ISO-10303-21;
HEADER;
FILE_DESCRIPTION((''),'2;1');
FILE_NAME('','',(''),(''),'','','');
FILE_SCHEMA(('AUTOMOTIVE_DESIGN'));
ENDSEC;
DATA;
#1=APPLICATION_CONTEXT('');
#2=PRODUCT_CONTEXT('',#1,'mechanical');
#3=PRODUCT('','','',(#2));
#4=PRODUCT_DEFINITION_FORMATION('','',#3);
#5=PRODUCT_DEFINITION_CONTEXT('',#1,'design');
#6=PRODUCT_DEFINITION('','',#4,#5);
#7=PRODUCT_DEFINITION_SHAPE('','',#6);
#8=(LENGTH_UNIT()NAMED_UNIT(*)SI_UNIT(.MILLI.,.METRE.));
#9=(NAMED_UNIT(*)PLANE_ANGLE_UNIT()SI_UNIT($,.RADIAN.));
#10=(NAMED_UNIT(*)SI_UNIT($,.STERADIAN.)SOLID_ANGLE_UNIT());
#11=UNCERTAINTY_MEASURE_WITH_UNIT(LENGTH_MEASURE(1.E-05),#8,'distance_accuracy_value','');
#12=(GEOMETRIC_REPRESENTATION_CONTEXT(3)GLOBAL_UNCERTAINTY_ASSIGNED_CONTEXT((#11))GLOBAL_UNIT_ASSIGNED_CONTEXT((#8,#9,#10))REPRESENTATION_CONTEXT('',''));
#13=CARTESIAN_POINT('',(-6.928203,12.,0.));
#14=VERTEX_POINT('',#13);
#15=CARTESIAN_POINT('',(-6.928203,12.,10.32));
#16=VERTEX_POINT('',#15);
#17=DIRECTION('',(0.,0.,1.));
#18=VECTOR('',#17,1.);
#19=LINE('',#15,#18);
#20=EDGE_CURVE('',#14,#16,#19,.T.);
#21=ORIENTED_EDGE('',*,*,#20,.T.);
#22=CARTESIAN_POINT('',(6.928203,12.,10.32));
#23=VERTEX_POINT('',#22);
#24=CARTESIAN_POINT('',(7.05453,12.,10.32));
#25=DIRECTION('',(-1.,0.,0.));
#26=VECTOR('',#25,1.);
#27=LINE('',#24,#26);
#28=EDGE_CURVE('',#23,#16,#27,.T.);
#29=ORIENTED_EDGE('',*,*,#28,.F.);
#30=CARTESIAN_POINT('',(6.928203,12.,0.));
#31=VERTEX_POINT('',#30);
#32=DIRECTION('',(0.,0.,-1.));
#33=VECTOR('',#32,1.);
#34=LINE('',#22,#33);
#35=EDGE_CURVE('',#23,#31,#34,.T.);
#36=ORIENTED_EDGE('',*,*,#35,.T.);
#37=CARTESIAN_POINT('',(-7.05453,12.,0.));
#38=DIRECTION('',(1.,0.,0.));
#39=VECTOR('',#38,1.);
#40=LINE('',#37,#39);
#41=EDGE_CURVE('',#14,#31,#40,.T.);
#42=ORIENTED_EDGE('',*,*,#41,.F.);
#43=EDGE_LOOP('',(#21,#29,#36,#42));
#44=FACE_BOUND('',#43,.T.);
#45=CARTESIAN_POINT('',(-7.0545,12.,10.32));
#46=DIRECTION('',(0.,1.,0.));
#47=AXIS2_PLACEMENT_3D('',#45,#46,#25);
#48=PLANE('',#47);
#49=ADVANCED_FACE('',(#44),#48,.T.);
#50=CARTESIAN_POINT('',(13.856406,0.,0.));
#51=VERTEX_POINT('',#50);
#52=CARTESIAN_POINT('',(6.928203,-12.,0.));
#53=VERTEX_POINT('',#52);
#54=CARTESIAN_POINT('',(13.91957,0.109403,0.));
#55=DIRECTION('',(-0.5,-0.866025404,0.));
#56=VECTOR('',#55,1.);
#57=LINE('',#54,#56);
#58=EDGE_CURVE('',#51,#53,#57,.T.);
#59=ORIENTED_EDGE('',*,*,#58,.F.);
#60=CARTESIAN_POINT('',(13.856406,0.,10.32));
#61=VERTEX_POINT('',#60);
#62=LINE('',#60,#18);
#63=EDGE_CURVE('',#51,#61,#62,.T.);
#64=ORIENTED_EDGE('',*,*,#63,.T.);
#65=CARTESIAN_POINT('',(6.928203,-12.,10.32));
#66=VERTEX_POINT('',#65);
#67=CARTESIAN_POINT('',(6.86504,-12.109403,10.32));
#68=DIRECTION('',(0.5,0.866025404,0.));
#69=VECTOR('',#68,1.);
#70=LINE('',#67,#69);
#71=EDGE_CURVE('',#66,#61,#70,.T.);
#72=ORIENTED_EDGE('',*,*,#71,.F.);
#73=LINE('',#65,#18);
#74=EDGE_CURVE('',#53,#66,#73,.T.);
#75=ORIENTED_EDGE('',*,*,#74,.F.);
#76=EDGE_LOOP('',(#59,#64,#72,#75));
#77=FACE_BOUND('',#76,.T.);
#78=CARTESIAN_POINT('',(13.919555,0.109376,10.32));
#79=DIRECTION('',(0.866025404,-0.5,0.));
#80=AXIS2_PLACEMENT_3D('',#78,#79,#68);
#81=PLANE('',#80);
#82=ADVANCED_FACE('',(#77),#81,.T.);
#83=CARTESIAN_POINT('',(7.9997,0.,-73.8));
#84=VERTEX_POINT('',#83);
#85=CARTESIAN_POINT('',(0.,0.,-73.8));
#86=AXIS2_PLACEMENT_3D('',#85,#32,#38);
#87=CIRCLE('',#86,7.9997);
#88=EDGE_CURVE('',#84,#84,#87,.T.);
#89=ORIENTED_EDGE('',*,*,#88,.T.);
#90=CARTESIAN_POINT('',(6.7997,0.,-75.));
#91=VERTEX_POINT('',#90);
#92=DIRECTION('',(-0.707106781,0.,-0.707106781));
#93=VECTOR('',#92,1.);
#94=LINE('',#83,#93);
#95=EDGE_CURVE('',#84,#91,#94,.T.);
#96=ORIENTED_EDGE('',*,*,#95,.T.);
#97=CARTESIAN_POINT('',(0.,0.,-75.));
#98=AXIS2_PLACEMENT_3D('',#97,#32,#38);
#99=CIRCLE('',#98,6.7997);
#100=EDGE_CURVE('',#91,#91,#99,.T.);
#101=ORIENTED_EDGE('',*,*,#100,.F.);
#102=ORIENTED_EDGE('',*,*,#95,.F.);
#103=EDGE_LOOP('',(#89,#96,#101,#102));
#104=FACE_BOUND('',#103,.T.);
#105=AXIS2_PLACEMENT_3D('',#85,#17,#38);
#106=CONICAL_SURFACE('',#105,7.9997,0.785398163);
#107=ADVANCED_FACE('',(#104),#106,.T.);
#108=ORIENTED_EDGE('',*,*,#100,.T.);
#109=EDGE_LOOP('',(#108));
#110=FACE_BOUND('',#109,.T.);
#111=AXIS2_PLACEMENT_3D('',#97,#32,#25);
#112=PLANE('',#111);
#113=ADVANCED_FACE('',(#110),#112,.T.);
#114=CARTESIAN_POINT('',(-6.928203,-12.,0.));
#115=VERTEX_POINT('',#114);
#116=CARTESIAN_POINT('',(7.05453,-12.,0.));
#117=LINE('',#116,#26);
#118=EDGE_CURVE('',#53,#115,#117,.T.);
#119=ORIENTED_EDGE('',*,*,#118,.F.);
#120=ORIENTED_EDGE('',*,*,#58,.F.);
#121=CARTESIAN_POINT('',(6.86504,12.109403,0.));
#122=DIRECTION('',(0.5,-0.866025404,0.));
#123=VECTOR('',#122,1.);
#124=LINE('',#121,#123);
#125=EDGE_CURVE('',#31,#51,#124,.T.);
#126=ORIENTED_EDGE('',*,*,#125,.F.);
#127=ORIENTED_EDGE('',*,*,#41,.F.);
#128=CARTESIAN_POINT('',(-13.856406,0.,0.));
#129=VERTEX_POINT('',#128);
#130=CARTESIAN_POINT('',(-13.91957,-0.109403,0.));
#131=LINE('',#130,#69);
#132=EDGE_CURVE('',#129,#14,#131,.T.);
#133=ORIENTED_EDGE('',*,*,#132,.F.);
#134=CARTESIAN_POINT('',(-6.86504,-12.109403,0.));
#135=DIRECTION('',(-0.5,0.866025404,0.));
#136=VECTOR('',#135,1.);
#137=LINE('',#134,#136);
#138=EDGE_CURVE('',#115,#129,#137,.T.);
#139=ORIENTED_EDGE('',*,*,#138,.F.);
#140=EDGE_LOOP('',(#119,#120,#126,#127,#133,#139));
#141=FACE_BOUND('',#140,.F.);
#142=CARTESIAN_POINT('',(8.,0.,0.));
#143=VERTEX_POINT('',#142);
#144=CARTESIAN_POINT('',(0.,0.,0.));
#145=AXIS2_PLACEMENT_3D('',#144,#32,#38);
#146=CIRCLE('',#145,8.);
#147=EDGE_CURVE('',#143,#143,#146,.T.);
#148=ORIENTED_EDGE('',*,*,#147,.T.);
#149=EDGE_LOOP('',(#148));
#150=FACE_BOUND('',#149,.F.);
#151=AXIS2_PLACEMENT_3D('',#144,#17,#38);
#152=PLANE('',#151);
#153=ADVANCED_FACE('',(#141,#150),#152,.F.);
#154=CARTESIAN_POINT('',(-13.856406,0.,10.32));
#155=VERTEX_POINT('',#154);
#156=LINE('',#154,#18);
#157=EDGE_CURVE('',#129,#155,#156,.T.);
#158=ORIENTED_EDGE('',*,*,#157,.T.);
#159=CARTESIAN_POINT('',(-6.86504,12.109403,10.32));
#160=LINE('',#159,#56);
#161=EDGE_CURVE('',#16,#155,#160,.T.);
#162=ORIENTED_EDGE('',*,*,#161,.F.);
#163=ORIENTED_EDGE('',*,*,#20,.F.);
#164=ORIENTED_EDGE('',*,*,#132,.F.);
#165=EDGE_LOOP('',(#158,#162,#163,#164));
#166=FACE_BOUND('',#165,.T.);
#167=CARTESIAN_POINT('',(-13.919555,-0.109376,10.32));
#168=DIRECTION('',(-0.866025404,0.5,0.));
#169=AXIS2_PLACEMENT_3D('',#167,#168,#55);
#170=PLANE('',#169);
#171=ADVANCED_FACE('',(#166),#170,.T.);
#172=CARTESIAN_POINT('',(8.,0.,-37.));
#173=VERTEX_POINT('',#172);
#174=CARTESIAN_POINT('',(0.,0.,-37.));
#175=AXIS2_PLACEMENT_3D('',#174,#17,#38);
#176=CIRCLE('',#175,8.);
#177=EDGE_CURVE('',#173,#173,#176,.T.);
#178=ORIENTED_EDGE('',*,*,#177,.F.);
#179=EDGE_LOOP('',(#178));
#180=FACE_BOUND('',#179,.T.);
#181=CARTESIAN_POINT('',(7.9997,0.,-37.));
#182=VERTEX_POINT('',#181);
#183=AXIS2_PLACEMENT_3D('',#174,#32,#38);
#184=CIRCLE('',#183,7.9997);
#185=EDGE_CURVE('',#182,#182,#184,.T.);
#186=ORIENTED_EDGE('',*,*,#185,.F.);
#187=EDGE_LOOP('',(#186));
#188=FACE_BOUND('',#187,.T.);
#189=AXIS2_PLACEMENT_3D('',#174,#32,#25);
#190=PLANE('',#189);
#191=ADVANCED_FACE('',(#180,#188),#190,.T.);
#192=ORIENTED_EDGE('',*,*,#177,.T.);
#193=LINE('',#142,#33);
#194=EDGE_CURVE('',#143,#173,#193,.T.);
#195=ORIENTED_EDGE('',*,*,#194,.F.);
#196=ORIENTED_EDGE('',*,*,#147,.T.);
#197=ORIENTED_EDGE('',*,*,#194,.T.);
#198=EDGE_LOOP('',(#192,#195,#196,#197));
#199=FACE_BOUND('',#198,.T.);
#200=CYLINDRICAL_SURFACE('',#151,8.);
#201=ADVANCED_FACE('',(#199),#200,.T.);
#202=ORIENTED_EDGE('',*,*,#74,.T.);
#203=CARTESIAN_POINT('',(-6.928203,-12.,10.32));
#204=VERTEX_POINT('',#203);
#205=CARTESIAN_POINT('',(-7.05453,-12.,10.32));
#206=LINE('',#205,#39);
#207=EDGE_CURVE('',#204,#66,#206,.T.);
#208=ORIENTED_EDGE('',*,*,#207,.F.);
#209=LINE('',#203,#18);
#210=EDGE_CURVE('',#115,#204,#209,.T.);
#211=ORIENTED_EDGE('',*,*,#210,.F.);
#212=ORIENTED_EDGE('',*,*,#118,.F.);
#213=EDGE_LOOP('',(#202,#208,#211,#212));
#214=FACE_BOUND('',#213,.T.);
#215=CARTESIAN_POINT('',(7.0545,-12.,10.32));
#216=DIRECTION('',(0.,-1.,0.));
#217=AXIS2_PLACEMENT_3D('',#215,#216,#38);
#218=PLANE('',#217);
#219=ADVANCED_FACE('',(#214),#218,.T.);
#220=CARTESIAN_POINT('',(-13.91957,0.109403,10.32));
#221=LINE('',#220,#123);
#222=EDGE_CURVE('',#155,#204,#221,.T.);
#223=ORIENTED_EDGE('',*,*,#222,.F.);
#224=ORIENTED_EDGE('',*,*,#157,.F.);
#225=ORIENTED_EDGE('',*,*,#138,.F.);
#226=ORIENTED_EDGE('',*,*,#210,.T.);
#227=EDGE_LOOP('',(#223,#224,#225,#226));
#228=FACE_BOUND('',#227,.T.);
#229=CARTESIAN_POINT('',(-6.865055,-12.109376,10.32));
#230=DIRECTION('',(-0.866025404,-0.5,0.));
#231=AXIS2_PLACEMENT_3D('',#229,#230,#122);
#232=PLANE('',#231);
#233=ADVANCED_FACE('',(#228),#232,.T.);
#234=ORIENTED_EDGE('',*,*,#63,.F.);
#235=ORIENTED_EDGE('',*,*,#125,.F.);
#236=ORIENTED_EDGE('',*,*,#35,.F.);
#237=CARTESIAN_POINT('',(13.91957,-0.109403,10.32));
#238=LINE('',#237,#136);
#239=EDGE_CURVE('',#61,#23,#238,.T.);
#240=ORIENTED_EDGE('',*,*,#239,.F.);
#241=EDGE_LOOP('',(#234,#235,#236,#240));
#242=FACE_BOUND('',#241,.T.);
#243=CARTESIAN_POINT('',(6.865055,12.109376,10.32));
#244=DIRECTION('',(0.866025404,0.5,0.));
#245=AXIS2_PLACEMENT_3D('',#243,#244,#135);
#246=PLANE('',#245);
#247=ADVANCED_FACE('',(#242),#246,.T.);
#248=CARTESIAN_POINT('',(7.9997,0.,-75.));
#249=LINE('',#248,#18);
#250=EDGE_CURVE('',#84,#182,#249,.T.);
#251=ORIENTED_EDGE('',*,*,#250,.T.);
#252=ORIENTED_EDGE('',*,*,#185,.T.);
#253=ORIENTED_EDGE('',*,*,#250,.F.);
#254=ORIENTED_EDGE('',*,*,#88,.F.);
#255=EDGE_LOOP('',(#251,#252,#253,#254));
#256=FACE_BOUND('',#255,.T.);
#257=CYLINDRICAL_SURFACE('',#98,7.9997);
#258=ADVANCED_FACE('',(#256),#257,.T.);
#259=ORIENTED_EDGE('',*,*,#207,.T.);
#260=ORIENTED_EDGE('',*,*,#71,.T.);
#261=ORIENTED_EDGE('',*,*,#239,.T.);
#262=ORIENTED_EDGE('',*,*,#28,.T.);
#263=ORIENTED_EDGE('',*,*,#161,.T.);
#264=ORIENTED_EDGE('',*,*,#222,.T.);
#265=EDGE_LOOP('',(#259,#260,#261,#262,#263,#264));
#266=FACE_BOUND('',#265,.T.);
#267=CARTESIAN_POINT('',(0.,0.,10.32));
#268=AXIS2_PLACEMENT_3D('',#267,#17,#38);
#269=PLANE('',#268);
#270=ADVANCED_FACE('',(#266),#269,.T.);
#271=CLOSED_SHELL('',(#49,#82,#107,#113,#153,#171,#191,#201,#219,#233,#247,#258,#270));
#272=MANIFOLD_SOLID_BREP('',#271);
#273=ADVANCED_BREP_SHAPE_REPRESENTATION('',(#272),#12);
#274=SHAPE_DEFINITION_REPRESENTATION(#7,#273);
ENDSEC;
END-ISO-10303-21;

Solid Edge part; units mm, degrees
sketch "Sketch1" plane through (0, 0, 0) normal (0, 0, 1) x (1, 0, 0)
  circle A0 centre (0, 0) radius 13.92
  dimension "D1" = 27.84
extrude "Protrusion1" add sketch "Sketch1" along normal blind 10.32
sketch "Sketch2" plane through (0, 0, 0) normal (0, 0, -1) x (1, 0, 0)
  circle A0 centre (0, 0) radius 8
extrude "Protrusion2" add sketch "Sketch2" along normal blind 75
sketch "Sketch3" plane through (0, 0, -75) normal (0, 0, -1) x (1, 0, 0)
  circle A0 centre (0, 0) radius 7.9997
extrude "Cutout1" cut sketch "Sketch3" against normal blind 38 flip side to cut
chamfer "Chamfer_1" distance 1.2 angle 45 1 edges at (-7.9997, 0, -75)
sketch "Sketch4" plane through (0, 0, 10.32) normal (0, 0, 1) x (1, 0, 0)
  line L0 (-7.0545, 12) -> (7.0545, 12)
  dimension "D1" = 24
extrude "Cutout2" cut sketch "Sketch4" against normal up to next material side at (0, 12.05, 10.32)
pattern_circular "Pattern1" count 6 over 360 about axis through (0, 0, 10.32) along (0, 0, 1) of "Cutout2"
properties part number "113538"
